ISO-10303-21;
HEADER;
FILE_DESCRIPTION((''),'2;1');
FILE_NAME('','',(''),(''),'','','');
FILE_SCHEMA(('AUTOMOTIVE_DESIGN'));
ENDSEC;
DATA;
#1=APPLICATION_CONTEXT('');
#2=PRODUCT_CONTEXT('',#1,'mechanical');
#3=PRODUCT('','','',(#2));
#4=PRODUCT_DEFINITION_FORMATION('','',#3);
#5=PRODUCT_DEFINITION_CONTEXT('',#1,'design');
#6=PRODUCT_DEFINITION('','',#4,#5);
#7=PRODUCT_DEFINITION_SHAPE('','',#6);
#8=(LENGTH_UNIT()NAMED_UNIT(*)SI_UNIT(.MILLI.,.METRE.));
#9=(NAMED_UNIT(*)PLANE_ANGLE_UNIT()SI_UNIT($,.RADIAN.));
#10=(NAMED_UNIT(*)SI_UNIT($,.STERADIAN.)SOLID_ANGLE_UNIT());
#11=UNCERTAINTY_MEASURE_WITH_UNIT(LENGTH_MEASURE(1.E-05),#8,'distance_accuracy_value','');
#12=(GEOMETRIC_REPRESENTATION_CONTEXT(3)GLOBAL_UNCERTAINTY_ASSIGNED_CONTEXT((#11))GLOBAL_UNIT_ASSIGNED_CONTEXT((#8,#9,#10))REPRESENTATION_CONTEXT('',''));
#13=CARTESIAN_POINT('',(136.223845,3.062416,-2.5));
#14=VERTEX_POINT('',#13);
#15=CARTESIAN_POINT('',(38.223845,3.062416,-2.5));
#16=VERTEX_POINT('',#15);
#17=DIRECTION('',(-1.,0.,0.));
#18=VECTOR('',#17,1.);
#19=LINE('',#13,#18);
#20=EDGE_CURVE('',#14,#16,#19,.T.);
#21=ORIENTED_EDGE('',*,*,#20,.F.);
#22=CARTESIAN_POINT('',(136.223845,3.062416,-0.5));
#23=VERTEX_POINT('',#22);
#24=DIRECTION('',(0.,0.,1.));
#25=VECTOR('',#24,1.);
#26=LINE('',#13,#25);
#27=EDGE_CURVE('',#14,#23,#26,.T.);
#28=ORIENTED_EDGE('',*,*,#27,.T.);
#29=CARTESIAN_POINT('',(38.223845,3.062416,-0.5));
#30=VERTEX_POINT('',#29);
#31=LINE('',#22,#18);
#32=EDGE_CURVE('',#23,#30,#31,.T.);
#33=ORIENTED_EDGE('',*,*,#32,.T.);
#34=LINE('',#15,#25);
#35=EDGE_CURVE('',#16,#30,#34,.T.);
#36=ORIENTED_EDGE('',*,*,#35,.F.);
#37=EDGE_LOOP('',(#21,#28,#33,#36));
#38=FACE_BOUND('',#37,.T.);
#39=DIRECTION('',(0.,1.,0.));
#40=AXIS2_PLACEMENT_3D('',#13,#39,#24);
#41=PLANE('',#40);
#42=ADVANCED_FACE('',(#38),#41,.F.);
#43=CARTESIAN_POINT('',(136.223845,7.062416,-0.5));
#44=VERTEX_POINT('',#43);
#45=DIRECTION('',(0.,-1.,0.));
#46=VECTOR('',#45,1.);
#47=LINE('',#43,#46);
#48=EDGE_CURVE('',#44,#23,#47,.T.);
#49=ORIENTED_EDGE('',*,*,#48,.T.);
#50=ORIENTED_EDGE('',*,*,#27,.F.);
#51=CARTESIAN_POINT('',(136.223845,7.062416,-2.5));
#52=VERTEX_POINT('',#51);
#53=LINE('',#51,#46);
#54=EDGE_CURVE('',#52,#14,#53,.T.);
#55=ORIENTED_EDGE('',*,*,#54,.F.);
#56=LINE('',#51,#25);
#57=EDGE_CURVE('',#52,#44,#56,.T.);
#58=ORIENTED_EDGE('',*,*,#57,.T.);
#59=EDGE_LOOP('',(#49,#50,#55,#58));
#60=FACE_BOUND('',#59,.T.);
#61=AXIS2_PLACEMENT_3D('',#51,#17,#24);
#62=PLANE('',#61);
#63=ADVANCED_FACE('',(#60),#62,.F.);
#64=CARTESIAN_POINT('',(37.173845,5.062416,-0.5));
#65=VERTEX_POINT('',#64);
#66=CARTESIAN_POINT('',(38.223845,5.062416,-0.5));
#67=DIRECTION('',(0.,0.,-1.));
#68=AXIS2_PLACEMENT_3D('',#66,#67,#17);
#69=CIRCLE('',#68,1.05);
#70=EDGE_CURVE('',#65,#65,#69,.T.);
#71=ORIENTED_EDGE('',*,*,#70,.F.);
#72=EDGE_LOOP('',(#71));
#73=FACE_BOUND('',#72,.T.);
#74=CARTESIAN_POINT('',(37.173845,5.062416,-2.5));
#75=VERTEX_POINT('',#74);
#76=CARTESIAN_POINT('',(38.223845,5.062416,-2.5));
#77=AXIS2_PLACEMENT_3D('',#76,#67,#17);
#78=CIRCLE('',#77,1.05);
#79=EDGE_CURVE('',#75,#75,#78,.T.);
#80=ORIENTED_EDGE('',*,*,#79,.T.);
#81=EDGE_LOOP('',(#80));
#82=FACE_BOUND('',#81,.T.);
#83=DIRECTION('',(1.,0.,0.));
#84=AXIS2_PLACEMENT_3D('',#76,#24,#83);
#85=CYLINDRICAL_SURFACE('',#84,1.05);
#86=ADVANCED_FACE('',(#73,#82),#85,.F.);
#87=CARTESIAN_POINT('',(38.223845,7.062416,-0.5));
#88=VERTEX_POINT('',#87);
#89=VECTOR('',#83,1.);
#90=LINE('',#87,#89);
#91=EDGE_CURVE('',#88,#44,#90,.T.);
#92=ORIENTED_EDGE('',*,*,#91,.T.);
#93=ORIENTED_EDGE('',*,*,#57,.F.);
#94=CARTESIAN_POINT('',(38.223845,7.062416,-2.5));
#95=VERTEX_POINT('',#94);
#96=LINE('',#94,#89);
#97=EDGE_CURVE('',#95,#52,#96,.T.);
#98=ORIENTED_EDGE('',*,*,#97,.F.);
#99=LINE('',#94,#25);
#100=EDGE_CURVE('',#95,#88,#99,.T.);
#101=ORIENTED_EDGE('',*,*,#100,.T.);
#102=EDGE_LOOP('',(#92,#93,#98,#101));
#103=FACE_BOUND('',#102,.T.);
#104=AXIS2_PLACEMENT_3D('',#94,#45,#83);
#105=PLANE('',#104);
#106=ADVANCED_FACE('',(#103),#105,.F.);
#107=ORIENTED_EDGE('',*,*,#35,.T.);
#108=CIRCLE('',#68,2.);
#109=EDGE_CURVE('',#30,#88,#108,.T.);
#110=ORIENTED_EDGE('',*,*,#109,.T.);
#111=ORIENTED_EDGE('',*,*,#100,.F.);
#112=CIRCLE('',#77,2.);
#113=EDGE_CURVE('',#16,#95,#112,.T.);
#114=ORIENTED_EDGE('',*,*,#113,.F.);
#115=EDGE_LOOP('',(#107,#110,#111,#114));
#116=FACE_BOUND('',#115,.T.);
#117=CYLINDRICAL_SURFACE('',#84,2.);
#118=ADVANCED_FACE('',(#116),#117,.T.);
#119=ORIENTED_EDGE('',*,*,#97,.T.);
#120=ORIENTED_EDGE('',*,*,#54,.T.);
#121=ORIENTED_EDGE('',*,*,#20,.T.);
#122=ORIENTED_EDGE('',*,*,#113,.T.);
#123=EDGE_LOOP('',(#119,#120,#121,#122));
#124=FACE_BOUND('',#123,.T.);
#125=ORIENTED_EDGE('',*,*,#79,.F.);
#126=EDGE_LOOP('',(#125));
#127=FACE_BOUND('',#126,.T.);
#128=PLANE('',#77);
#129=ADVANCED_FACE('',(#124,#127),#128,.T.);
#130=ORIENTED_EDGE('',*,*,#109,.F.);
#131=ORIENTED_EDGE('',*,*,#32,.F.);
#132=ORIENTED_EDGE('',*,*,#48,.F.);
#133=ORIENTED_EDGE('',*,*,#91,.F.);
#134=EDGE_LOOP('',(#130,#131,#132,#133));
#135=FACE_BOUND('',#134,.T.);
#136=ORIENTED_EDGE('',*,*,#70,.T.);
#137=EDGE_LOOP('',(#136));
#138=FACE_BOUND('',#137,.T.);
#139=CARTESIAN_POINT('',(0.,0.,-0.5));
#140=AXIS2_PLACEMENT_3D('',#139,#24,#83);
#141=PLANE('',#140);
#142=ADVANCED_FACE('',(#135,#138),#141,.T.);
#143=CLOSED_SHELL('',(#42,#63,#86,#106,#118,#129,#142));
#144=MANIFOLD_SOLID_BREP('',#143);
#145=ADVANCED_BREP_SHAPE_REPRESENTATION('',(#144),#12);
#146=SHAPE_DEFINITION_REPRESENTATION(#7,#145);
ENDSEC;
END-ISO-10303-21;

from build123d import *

# Parameters (mm, degrees)
EXTRUDE_1_DEPTH      = 0.5
EXTRUDE_1_DEPTH_BACK = 0.5
SKETCH_1_W           = 100
SKETCH_1_H           = 20
CUT_EXTRUDE_1_DEPTH  = 52
SKETCH_8_R           = 1.5
CUT_EXTRUDE_2_DEPTH  = 52.00000012
SKETCH_9_R           = 1.05
EXTRUDE_2_DEPTH      = 2
OTHER_START          = -0.5
OTHER_1_OUTLINE_W    = 100
OTHER_1_OUTLINE_H    = 20
OTHER_1_OUTLINE_R    = 1.5
OTHER_1_DEPTH        = 1


# Read off the part's stored shape, not the designer's step: Пересечение1
with BuildPart() as part:
    # Эскиз1 → Бобышка-Вытянуть1 (new, two sides: drawn at the far end of the back side and taken through both)
    with BuildSketch(Plane.XY.offset(-EXTRUDE_1_DEPTH_BACK)):
        Rectangle(SKETCH_1_W, SKETCH_1_H)
    extrude(amount=EXTRUDE_1_DEPTH + EXTRUDE_1_DEPTH_BACK)

    # Эскиз7 → Вырез-Вытянуть1 (cut, through all)
    with BuildSketch(Plane.XY.offset(0.5)):
        with BuildLine():
            ThreePointArc((37.261495637, 5.33423095), (37.952030231, 4.100066466), (39.186194715, 4.79060106))
            add(Edge.make_bspline(
                [(39.186194715, 4.79060106), (39.206075717, 4.860988923), (39.262496645, 4.988405972), (39.480772307, 5.263607744), (39.972116976, 5.552949613), (40.89012751, 5.611168859), (42.346211172, 5.064723366), (44.026902125, 2.933159087), (43.815557835, -1.408653234), (40.817030581, -4.80884968), (37.021062322, -6.164885186), (33.732157303, -6.253240822), (30.314099065, -5.243442536), (27.144697082, -3.082909818), (25.035720973, -0.378766084), (23.85308145, 2.208270108), (23.449186454, 3.64108751), (23.305322842, 4.359662985)],
                knots=[0, 0, 0, 0, 0.03125, 0.0625, 0.125, 0.1875, 0.25, 0.375, 0.5, 0.625, 0.6875, 0.75, 0.8125, 0.875, 0.9375, 0.96875, 1, 1, 1, 1], degree=3))
            ThreePointArc((23.305322842, 4.359662985), (22.128470162, 5.143893671), (21.344239476, 3.96704099))
            add(Edge.make_bspline(
                [(37.261495637, 5.33423095), (37.539855307, 6.319751815), (39.275153501, 7.946538331), (43.246471825, 7.317604488), (46.129826318, 3.464099405), (45.771597181, -2.30217859), (41.988507816, -6.528062966), (37.380831362, -8.166298308), (33.454677533, -8.267248255), (29.431863805, -7.074452826), (25.746418814, -4.55740521), (23.320064013, -1.441995451), (21.967408891, 1.518598896), (21.5081203, 3.148482776), (21.344239476, 3.96704099)],
                knots=[0, 0, 0, 0, 0.125, 0.25, 0.375, 0.5, 0.625, 0.6875, 0.75, 0.8125, 0.875, 0.9375, 0.96875, 1, 1, 1, 1], degree=3))
        make_face()
    extrude(amount=-CUT_EXTRUDE_1_DEPTH, mode=Mode.SUBTRACT)

    # Эскиз8 → Вырез-Вытянуть2 (cut, through all)
    with BuildSketch(Plane(origin=(0, 0, -0.5), x_dir=(-1, 0, 0), z_dir=(0, 0, -1))):
        with Locations((-40.392058098, 0)):
            Circle(SKETCH_8_R)
    cut_extrude_2 = extrude(amount=-CUT_EXTRUDE_2_DEPTH, mode=Mode.SUBTRACT)

    # Зеркальное отражение1: Вырез-Вытянуть2 across plane
    add(cut_extrude_2.mirror(Plane(origin=(0, 0, 0), x_dir=(0, 0, 1), z_dir=(1, 0, 0))), mode=Mode.SUBTRACT)

    # Пересечение1 outline → Пересечение1 (cut)
    with BuildSketch(Plane.XY.offset(OTHER_START)):
        Rectangle(OTHER_1_OUTLINE_W, OTHER_1_OUTLINE_H)
        with BuildLine():
            add(Edge.make_bspline(
                [(21.344239476, 3.96704099), (21.5081203, 3.148482776), (21.967408891, 1.518598896), (23.320064013, -1.441995451), (25.746418814, -4.55740521), (29.431863805, -7.074452826), (33.454677533, -8.267248255), (37.380831362, -8.166298308), (41.988507816, -6.528062966), (45.771597181, -2.30217859), (46.129826318, 3.464099405), (43.246471825, 7.317604488), (39.275153501, 7.946538331), (37.539855307, 6.319751815), (37.261495637, 5.33423095)],
                knots=[0, 0, 0, 0, 0.03125, 0.0625, 0.125, 0.1875, 0.25, 0.3125, 0.375, 0.5, 0.625, 0.75, 0.875, 1, 1, 1, 1], degree=3))
            ThreePointArc((21.344239476, 3.96704099), (22.128470161, 5.143893671), (23.305322842, 4.359662985))
            add(Edge.make_bspline(
                [(39.186194715, 4.79060106), (39.206075717, 4.860988923), (39.262496645, 4.988405972), (39.480772307, 5.263607744), (39.972116976, 5.552949613), (40.89012751, 5.611168859), (42.346211172, 5.064723366), (44.026902125, 2.933159087), (43.815557835, -1.408653234), (40.817030581, -4.80884968), (37.021062322, -6.164885186), (33.732157303, -6.253240822), (30.314099065, -5.243442536), (27.144697082, -3.082909818), (25.035720973, -0.378766084), (23.85308145, 2.208270108), (23.449186454, 3.64108751), (23.305322842, 4.359662985)],
                knots=[0, 0, 0, 0, 0.03125, 0.0625, 0.125, 0.1875, 0.25, 0.375, 0.5, 0.625, 0.6875, 0.75, 0.8125, 0.875, 0.9375, 0.96875, 1, 1, 1, 1], degree=3))
            ThreePointArc((39.186194715, 4.79060106), (37.952030231, 4.100066466), (37.261495637, 5.33423095))
        make_face(mode=Mode.SUBTRACT)
        with Locations((-40.392058098, 0)):
            Circle(OTHER_1_OUTLINE_R, mode=Mode.SUBTRACT)
        with Locations((40.392058098, 0)):
            Circle(OTHER_1_OUTLINE_R, mode=Mode.SUBTRACT)
    extrude(amount=OTHER_1_DEPTH, mode=Mode.SUBTRACT)


with BuildPart() as body_2:
    # Эскиз9 → Бобышка-Вытянуть2 (new body)
    with BuildSketch(Plane(origin=(0, 0, -0.5), x_dir=(-1, 0, 0), z_dir=(0, 0, -1))):
        with BuildLine():
            Line((-38.223845176, 7.062416005), (-136.223845176, 7.062416005))
            Line((-136.223845176, 7.062416005), (-136.223845176, 3.062416005))
            Line((-136.223845176, 3.062416005), (-38.223845176, 3.062416005))
            ThreePointArc((-38.223845176, 3.062416005), (-36.223845176, 5.062416005), (-38.223845176, 7.062416005))
        make_face()
        with Locations((-38.223845176, 5.062416005)):
            Circle(SKETCH_9_R, mode=Mode.SUBTRACT)
    extrude(amount=EXTRUDE_2_DEPTH)


solid = body_2.part
